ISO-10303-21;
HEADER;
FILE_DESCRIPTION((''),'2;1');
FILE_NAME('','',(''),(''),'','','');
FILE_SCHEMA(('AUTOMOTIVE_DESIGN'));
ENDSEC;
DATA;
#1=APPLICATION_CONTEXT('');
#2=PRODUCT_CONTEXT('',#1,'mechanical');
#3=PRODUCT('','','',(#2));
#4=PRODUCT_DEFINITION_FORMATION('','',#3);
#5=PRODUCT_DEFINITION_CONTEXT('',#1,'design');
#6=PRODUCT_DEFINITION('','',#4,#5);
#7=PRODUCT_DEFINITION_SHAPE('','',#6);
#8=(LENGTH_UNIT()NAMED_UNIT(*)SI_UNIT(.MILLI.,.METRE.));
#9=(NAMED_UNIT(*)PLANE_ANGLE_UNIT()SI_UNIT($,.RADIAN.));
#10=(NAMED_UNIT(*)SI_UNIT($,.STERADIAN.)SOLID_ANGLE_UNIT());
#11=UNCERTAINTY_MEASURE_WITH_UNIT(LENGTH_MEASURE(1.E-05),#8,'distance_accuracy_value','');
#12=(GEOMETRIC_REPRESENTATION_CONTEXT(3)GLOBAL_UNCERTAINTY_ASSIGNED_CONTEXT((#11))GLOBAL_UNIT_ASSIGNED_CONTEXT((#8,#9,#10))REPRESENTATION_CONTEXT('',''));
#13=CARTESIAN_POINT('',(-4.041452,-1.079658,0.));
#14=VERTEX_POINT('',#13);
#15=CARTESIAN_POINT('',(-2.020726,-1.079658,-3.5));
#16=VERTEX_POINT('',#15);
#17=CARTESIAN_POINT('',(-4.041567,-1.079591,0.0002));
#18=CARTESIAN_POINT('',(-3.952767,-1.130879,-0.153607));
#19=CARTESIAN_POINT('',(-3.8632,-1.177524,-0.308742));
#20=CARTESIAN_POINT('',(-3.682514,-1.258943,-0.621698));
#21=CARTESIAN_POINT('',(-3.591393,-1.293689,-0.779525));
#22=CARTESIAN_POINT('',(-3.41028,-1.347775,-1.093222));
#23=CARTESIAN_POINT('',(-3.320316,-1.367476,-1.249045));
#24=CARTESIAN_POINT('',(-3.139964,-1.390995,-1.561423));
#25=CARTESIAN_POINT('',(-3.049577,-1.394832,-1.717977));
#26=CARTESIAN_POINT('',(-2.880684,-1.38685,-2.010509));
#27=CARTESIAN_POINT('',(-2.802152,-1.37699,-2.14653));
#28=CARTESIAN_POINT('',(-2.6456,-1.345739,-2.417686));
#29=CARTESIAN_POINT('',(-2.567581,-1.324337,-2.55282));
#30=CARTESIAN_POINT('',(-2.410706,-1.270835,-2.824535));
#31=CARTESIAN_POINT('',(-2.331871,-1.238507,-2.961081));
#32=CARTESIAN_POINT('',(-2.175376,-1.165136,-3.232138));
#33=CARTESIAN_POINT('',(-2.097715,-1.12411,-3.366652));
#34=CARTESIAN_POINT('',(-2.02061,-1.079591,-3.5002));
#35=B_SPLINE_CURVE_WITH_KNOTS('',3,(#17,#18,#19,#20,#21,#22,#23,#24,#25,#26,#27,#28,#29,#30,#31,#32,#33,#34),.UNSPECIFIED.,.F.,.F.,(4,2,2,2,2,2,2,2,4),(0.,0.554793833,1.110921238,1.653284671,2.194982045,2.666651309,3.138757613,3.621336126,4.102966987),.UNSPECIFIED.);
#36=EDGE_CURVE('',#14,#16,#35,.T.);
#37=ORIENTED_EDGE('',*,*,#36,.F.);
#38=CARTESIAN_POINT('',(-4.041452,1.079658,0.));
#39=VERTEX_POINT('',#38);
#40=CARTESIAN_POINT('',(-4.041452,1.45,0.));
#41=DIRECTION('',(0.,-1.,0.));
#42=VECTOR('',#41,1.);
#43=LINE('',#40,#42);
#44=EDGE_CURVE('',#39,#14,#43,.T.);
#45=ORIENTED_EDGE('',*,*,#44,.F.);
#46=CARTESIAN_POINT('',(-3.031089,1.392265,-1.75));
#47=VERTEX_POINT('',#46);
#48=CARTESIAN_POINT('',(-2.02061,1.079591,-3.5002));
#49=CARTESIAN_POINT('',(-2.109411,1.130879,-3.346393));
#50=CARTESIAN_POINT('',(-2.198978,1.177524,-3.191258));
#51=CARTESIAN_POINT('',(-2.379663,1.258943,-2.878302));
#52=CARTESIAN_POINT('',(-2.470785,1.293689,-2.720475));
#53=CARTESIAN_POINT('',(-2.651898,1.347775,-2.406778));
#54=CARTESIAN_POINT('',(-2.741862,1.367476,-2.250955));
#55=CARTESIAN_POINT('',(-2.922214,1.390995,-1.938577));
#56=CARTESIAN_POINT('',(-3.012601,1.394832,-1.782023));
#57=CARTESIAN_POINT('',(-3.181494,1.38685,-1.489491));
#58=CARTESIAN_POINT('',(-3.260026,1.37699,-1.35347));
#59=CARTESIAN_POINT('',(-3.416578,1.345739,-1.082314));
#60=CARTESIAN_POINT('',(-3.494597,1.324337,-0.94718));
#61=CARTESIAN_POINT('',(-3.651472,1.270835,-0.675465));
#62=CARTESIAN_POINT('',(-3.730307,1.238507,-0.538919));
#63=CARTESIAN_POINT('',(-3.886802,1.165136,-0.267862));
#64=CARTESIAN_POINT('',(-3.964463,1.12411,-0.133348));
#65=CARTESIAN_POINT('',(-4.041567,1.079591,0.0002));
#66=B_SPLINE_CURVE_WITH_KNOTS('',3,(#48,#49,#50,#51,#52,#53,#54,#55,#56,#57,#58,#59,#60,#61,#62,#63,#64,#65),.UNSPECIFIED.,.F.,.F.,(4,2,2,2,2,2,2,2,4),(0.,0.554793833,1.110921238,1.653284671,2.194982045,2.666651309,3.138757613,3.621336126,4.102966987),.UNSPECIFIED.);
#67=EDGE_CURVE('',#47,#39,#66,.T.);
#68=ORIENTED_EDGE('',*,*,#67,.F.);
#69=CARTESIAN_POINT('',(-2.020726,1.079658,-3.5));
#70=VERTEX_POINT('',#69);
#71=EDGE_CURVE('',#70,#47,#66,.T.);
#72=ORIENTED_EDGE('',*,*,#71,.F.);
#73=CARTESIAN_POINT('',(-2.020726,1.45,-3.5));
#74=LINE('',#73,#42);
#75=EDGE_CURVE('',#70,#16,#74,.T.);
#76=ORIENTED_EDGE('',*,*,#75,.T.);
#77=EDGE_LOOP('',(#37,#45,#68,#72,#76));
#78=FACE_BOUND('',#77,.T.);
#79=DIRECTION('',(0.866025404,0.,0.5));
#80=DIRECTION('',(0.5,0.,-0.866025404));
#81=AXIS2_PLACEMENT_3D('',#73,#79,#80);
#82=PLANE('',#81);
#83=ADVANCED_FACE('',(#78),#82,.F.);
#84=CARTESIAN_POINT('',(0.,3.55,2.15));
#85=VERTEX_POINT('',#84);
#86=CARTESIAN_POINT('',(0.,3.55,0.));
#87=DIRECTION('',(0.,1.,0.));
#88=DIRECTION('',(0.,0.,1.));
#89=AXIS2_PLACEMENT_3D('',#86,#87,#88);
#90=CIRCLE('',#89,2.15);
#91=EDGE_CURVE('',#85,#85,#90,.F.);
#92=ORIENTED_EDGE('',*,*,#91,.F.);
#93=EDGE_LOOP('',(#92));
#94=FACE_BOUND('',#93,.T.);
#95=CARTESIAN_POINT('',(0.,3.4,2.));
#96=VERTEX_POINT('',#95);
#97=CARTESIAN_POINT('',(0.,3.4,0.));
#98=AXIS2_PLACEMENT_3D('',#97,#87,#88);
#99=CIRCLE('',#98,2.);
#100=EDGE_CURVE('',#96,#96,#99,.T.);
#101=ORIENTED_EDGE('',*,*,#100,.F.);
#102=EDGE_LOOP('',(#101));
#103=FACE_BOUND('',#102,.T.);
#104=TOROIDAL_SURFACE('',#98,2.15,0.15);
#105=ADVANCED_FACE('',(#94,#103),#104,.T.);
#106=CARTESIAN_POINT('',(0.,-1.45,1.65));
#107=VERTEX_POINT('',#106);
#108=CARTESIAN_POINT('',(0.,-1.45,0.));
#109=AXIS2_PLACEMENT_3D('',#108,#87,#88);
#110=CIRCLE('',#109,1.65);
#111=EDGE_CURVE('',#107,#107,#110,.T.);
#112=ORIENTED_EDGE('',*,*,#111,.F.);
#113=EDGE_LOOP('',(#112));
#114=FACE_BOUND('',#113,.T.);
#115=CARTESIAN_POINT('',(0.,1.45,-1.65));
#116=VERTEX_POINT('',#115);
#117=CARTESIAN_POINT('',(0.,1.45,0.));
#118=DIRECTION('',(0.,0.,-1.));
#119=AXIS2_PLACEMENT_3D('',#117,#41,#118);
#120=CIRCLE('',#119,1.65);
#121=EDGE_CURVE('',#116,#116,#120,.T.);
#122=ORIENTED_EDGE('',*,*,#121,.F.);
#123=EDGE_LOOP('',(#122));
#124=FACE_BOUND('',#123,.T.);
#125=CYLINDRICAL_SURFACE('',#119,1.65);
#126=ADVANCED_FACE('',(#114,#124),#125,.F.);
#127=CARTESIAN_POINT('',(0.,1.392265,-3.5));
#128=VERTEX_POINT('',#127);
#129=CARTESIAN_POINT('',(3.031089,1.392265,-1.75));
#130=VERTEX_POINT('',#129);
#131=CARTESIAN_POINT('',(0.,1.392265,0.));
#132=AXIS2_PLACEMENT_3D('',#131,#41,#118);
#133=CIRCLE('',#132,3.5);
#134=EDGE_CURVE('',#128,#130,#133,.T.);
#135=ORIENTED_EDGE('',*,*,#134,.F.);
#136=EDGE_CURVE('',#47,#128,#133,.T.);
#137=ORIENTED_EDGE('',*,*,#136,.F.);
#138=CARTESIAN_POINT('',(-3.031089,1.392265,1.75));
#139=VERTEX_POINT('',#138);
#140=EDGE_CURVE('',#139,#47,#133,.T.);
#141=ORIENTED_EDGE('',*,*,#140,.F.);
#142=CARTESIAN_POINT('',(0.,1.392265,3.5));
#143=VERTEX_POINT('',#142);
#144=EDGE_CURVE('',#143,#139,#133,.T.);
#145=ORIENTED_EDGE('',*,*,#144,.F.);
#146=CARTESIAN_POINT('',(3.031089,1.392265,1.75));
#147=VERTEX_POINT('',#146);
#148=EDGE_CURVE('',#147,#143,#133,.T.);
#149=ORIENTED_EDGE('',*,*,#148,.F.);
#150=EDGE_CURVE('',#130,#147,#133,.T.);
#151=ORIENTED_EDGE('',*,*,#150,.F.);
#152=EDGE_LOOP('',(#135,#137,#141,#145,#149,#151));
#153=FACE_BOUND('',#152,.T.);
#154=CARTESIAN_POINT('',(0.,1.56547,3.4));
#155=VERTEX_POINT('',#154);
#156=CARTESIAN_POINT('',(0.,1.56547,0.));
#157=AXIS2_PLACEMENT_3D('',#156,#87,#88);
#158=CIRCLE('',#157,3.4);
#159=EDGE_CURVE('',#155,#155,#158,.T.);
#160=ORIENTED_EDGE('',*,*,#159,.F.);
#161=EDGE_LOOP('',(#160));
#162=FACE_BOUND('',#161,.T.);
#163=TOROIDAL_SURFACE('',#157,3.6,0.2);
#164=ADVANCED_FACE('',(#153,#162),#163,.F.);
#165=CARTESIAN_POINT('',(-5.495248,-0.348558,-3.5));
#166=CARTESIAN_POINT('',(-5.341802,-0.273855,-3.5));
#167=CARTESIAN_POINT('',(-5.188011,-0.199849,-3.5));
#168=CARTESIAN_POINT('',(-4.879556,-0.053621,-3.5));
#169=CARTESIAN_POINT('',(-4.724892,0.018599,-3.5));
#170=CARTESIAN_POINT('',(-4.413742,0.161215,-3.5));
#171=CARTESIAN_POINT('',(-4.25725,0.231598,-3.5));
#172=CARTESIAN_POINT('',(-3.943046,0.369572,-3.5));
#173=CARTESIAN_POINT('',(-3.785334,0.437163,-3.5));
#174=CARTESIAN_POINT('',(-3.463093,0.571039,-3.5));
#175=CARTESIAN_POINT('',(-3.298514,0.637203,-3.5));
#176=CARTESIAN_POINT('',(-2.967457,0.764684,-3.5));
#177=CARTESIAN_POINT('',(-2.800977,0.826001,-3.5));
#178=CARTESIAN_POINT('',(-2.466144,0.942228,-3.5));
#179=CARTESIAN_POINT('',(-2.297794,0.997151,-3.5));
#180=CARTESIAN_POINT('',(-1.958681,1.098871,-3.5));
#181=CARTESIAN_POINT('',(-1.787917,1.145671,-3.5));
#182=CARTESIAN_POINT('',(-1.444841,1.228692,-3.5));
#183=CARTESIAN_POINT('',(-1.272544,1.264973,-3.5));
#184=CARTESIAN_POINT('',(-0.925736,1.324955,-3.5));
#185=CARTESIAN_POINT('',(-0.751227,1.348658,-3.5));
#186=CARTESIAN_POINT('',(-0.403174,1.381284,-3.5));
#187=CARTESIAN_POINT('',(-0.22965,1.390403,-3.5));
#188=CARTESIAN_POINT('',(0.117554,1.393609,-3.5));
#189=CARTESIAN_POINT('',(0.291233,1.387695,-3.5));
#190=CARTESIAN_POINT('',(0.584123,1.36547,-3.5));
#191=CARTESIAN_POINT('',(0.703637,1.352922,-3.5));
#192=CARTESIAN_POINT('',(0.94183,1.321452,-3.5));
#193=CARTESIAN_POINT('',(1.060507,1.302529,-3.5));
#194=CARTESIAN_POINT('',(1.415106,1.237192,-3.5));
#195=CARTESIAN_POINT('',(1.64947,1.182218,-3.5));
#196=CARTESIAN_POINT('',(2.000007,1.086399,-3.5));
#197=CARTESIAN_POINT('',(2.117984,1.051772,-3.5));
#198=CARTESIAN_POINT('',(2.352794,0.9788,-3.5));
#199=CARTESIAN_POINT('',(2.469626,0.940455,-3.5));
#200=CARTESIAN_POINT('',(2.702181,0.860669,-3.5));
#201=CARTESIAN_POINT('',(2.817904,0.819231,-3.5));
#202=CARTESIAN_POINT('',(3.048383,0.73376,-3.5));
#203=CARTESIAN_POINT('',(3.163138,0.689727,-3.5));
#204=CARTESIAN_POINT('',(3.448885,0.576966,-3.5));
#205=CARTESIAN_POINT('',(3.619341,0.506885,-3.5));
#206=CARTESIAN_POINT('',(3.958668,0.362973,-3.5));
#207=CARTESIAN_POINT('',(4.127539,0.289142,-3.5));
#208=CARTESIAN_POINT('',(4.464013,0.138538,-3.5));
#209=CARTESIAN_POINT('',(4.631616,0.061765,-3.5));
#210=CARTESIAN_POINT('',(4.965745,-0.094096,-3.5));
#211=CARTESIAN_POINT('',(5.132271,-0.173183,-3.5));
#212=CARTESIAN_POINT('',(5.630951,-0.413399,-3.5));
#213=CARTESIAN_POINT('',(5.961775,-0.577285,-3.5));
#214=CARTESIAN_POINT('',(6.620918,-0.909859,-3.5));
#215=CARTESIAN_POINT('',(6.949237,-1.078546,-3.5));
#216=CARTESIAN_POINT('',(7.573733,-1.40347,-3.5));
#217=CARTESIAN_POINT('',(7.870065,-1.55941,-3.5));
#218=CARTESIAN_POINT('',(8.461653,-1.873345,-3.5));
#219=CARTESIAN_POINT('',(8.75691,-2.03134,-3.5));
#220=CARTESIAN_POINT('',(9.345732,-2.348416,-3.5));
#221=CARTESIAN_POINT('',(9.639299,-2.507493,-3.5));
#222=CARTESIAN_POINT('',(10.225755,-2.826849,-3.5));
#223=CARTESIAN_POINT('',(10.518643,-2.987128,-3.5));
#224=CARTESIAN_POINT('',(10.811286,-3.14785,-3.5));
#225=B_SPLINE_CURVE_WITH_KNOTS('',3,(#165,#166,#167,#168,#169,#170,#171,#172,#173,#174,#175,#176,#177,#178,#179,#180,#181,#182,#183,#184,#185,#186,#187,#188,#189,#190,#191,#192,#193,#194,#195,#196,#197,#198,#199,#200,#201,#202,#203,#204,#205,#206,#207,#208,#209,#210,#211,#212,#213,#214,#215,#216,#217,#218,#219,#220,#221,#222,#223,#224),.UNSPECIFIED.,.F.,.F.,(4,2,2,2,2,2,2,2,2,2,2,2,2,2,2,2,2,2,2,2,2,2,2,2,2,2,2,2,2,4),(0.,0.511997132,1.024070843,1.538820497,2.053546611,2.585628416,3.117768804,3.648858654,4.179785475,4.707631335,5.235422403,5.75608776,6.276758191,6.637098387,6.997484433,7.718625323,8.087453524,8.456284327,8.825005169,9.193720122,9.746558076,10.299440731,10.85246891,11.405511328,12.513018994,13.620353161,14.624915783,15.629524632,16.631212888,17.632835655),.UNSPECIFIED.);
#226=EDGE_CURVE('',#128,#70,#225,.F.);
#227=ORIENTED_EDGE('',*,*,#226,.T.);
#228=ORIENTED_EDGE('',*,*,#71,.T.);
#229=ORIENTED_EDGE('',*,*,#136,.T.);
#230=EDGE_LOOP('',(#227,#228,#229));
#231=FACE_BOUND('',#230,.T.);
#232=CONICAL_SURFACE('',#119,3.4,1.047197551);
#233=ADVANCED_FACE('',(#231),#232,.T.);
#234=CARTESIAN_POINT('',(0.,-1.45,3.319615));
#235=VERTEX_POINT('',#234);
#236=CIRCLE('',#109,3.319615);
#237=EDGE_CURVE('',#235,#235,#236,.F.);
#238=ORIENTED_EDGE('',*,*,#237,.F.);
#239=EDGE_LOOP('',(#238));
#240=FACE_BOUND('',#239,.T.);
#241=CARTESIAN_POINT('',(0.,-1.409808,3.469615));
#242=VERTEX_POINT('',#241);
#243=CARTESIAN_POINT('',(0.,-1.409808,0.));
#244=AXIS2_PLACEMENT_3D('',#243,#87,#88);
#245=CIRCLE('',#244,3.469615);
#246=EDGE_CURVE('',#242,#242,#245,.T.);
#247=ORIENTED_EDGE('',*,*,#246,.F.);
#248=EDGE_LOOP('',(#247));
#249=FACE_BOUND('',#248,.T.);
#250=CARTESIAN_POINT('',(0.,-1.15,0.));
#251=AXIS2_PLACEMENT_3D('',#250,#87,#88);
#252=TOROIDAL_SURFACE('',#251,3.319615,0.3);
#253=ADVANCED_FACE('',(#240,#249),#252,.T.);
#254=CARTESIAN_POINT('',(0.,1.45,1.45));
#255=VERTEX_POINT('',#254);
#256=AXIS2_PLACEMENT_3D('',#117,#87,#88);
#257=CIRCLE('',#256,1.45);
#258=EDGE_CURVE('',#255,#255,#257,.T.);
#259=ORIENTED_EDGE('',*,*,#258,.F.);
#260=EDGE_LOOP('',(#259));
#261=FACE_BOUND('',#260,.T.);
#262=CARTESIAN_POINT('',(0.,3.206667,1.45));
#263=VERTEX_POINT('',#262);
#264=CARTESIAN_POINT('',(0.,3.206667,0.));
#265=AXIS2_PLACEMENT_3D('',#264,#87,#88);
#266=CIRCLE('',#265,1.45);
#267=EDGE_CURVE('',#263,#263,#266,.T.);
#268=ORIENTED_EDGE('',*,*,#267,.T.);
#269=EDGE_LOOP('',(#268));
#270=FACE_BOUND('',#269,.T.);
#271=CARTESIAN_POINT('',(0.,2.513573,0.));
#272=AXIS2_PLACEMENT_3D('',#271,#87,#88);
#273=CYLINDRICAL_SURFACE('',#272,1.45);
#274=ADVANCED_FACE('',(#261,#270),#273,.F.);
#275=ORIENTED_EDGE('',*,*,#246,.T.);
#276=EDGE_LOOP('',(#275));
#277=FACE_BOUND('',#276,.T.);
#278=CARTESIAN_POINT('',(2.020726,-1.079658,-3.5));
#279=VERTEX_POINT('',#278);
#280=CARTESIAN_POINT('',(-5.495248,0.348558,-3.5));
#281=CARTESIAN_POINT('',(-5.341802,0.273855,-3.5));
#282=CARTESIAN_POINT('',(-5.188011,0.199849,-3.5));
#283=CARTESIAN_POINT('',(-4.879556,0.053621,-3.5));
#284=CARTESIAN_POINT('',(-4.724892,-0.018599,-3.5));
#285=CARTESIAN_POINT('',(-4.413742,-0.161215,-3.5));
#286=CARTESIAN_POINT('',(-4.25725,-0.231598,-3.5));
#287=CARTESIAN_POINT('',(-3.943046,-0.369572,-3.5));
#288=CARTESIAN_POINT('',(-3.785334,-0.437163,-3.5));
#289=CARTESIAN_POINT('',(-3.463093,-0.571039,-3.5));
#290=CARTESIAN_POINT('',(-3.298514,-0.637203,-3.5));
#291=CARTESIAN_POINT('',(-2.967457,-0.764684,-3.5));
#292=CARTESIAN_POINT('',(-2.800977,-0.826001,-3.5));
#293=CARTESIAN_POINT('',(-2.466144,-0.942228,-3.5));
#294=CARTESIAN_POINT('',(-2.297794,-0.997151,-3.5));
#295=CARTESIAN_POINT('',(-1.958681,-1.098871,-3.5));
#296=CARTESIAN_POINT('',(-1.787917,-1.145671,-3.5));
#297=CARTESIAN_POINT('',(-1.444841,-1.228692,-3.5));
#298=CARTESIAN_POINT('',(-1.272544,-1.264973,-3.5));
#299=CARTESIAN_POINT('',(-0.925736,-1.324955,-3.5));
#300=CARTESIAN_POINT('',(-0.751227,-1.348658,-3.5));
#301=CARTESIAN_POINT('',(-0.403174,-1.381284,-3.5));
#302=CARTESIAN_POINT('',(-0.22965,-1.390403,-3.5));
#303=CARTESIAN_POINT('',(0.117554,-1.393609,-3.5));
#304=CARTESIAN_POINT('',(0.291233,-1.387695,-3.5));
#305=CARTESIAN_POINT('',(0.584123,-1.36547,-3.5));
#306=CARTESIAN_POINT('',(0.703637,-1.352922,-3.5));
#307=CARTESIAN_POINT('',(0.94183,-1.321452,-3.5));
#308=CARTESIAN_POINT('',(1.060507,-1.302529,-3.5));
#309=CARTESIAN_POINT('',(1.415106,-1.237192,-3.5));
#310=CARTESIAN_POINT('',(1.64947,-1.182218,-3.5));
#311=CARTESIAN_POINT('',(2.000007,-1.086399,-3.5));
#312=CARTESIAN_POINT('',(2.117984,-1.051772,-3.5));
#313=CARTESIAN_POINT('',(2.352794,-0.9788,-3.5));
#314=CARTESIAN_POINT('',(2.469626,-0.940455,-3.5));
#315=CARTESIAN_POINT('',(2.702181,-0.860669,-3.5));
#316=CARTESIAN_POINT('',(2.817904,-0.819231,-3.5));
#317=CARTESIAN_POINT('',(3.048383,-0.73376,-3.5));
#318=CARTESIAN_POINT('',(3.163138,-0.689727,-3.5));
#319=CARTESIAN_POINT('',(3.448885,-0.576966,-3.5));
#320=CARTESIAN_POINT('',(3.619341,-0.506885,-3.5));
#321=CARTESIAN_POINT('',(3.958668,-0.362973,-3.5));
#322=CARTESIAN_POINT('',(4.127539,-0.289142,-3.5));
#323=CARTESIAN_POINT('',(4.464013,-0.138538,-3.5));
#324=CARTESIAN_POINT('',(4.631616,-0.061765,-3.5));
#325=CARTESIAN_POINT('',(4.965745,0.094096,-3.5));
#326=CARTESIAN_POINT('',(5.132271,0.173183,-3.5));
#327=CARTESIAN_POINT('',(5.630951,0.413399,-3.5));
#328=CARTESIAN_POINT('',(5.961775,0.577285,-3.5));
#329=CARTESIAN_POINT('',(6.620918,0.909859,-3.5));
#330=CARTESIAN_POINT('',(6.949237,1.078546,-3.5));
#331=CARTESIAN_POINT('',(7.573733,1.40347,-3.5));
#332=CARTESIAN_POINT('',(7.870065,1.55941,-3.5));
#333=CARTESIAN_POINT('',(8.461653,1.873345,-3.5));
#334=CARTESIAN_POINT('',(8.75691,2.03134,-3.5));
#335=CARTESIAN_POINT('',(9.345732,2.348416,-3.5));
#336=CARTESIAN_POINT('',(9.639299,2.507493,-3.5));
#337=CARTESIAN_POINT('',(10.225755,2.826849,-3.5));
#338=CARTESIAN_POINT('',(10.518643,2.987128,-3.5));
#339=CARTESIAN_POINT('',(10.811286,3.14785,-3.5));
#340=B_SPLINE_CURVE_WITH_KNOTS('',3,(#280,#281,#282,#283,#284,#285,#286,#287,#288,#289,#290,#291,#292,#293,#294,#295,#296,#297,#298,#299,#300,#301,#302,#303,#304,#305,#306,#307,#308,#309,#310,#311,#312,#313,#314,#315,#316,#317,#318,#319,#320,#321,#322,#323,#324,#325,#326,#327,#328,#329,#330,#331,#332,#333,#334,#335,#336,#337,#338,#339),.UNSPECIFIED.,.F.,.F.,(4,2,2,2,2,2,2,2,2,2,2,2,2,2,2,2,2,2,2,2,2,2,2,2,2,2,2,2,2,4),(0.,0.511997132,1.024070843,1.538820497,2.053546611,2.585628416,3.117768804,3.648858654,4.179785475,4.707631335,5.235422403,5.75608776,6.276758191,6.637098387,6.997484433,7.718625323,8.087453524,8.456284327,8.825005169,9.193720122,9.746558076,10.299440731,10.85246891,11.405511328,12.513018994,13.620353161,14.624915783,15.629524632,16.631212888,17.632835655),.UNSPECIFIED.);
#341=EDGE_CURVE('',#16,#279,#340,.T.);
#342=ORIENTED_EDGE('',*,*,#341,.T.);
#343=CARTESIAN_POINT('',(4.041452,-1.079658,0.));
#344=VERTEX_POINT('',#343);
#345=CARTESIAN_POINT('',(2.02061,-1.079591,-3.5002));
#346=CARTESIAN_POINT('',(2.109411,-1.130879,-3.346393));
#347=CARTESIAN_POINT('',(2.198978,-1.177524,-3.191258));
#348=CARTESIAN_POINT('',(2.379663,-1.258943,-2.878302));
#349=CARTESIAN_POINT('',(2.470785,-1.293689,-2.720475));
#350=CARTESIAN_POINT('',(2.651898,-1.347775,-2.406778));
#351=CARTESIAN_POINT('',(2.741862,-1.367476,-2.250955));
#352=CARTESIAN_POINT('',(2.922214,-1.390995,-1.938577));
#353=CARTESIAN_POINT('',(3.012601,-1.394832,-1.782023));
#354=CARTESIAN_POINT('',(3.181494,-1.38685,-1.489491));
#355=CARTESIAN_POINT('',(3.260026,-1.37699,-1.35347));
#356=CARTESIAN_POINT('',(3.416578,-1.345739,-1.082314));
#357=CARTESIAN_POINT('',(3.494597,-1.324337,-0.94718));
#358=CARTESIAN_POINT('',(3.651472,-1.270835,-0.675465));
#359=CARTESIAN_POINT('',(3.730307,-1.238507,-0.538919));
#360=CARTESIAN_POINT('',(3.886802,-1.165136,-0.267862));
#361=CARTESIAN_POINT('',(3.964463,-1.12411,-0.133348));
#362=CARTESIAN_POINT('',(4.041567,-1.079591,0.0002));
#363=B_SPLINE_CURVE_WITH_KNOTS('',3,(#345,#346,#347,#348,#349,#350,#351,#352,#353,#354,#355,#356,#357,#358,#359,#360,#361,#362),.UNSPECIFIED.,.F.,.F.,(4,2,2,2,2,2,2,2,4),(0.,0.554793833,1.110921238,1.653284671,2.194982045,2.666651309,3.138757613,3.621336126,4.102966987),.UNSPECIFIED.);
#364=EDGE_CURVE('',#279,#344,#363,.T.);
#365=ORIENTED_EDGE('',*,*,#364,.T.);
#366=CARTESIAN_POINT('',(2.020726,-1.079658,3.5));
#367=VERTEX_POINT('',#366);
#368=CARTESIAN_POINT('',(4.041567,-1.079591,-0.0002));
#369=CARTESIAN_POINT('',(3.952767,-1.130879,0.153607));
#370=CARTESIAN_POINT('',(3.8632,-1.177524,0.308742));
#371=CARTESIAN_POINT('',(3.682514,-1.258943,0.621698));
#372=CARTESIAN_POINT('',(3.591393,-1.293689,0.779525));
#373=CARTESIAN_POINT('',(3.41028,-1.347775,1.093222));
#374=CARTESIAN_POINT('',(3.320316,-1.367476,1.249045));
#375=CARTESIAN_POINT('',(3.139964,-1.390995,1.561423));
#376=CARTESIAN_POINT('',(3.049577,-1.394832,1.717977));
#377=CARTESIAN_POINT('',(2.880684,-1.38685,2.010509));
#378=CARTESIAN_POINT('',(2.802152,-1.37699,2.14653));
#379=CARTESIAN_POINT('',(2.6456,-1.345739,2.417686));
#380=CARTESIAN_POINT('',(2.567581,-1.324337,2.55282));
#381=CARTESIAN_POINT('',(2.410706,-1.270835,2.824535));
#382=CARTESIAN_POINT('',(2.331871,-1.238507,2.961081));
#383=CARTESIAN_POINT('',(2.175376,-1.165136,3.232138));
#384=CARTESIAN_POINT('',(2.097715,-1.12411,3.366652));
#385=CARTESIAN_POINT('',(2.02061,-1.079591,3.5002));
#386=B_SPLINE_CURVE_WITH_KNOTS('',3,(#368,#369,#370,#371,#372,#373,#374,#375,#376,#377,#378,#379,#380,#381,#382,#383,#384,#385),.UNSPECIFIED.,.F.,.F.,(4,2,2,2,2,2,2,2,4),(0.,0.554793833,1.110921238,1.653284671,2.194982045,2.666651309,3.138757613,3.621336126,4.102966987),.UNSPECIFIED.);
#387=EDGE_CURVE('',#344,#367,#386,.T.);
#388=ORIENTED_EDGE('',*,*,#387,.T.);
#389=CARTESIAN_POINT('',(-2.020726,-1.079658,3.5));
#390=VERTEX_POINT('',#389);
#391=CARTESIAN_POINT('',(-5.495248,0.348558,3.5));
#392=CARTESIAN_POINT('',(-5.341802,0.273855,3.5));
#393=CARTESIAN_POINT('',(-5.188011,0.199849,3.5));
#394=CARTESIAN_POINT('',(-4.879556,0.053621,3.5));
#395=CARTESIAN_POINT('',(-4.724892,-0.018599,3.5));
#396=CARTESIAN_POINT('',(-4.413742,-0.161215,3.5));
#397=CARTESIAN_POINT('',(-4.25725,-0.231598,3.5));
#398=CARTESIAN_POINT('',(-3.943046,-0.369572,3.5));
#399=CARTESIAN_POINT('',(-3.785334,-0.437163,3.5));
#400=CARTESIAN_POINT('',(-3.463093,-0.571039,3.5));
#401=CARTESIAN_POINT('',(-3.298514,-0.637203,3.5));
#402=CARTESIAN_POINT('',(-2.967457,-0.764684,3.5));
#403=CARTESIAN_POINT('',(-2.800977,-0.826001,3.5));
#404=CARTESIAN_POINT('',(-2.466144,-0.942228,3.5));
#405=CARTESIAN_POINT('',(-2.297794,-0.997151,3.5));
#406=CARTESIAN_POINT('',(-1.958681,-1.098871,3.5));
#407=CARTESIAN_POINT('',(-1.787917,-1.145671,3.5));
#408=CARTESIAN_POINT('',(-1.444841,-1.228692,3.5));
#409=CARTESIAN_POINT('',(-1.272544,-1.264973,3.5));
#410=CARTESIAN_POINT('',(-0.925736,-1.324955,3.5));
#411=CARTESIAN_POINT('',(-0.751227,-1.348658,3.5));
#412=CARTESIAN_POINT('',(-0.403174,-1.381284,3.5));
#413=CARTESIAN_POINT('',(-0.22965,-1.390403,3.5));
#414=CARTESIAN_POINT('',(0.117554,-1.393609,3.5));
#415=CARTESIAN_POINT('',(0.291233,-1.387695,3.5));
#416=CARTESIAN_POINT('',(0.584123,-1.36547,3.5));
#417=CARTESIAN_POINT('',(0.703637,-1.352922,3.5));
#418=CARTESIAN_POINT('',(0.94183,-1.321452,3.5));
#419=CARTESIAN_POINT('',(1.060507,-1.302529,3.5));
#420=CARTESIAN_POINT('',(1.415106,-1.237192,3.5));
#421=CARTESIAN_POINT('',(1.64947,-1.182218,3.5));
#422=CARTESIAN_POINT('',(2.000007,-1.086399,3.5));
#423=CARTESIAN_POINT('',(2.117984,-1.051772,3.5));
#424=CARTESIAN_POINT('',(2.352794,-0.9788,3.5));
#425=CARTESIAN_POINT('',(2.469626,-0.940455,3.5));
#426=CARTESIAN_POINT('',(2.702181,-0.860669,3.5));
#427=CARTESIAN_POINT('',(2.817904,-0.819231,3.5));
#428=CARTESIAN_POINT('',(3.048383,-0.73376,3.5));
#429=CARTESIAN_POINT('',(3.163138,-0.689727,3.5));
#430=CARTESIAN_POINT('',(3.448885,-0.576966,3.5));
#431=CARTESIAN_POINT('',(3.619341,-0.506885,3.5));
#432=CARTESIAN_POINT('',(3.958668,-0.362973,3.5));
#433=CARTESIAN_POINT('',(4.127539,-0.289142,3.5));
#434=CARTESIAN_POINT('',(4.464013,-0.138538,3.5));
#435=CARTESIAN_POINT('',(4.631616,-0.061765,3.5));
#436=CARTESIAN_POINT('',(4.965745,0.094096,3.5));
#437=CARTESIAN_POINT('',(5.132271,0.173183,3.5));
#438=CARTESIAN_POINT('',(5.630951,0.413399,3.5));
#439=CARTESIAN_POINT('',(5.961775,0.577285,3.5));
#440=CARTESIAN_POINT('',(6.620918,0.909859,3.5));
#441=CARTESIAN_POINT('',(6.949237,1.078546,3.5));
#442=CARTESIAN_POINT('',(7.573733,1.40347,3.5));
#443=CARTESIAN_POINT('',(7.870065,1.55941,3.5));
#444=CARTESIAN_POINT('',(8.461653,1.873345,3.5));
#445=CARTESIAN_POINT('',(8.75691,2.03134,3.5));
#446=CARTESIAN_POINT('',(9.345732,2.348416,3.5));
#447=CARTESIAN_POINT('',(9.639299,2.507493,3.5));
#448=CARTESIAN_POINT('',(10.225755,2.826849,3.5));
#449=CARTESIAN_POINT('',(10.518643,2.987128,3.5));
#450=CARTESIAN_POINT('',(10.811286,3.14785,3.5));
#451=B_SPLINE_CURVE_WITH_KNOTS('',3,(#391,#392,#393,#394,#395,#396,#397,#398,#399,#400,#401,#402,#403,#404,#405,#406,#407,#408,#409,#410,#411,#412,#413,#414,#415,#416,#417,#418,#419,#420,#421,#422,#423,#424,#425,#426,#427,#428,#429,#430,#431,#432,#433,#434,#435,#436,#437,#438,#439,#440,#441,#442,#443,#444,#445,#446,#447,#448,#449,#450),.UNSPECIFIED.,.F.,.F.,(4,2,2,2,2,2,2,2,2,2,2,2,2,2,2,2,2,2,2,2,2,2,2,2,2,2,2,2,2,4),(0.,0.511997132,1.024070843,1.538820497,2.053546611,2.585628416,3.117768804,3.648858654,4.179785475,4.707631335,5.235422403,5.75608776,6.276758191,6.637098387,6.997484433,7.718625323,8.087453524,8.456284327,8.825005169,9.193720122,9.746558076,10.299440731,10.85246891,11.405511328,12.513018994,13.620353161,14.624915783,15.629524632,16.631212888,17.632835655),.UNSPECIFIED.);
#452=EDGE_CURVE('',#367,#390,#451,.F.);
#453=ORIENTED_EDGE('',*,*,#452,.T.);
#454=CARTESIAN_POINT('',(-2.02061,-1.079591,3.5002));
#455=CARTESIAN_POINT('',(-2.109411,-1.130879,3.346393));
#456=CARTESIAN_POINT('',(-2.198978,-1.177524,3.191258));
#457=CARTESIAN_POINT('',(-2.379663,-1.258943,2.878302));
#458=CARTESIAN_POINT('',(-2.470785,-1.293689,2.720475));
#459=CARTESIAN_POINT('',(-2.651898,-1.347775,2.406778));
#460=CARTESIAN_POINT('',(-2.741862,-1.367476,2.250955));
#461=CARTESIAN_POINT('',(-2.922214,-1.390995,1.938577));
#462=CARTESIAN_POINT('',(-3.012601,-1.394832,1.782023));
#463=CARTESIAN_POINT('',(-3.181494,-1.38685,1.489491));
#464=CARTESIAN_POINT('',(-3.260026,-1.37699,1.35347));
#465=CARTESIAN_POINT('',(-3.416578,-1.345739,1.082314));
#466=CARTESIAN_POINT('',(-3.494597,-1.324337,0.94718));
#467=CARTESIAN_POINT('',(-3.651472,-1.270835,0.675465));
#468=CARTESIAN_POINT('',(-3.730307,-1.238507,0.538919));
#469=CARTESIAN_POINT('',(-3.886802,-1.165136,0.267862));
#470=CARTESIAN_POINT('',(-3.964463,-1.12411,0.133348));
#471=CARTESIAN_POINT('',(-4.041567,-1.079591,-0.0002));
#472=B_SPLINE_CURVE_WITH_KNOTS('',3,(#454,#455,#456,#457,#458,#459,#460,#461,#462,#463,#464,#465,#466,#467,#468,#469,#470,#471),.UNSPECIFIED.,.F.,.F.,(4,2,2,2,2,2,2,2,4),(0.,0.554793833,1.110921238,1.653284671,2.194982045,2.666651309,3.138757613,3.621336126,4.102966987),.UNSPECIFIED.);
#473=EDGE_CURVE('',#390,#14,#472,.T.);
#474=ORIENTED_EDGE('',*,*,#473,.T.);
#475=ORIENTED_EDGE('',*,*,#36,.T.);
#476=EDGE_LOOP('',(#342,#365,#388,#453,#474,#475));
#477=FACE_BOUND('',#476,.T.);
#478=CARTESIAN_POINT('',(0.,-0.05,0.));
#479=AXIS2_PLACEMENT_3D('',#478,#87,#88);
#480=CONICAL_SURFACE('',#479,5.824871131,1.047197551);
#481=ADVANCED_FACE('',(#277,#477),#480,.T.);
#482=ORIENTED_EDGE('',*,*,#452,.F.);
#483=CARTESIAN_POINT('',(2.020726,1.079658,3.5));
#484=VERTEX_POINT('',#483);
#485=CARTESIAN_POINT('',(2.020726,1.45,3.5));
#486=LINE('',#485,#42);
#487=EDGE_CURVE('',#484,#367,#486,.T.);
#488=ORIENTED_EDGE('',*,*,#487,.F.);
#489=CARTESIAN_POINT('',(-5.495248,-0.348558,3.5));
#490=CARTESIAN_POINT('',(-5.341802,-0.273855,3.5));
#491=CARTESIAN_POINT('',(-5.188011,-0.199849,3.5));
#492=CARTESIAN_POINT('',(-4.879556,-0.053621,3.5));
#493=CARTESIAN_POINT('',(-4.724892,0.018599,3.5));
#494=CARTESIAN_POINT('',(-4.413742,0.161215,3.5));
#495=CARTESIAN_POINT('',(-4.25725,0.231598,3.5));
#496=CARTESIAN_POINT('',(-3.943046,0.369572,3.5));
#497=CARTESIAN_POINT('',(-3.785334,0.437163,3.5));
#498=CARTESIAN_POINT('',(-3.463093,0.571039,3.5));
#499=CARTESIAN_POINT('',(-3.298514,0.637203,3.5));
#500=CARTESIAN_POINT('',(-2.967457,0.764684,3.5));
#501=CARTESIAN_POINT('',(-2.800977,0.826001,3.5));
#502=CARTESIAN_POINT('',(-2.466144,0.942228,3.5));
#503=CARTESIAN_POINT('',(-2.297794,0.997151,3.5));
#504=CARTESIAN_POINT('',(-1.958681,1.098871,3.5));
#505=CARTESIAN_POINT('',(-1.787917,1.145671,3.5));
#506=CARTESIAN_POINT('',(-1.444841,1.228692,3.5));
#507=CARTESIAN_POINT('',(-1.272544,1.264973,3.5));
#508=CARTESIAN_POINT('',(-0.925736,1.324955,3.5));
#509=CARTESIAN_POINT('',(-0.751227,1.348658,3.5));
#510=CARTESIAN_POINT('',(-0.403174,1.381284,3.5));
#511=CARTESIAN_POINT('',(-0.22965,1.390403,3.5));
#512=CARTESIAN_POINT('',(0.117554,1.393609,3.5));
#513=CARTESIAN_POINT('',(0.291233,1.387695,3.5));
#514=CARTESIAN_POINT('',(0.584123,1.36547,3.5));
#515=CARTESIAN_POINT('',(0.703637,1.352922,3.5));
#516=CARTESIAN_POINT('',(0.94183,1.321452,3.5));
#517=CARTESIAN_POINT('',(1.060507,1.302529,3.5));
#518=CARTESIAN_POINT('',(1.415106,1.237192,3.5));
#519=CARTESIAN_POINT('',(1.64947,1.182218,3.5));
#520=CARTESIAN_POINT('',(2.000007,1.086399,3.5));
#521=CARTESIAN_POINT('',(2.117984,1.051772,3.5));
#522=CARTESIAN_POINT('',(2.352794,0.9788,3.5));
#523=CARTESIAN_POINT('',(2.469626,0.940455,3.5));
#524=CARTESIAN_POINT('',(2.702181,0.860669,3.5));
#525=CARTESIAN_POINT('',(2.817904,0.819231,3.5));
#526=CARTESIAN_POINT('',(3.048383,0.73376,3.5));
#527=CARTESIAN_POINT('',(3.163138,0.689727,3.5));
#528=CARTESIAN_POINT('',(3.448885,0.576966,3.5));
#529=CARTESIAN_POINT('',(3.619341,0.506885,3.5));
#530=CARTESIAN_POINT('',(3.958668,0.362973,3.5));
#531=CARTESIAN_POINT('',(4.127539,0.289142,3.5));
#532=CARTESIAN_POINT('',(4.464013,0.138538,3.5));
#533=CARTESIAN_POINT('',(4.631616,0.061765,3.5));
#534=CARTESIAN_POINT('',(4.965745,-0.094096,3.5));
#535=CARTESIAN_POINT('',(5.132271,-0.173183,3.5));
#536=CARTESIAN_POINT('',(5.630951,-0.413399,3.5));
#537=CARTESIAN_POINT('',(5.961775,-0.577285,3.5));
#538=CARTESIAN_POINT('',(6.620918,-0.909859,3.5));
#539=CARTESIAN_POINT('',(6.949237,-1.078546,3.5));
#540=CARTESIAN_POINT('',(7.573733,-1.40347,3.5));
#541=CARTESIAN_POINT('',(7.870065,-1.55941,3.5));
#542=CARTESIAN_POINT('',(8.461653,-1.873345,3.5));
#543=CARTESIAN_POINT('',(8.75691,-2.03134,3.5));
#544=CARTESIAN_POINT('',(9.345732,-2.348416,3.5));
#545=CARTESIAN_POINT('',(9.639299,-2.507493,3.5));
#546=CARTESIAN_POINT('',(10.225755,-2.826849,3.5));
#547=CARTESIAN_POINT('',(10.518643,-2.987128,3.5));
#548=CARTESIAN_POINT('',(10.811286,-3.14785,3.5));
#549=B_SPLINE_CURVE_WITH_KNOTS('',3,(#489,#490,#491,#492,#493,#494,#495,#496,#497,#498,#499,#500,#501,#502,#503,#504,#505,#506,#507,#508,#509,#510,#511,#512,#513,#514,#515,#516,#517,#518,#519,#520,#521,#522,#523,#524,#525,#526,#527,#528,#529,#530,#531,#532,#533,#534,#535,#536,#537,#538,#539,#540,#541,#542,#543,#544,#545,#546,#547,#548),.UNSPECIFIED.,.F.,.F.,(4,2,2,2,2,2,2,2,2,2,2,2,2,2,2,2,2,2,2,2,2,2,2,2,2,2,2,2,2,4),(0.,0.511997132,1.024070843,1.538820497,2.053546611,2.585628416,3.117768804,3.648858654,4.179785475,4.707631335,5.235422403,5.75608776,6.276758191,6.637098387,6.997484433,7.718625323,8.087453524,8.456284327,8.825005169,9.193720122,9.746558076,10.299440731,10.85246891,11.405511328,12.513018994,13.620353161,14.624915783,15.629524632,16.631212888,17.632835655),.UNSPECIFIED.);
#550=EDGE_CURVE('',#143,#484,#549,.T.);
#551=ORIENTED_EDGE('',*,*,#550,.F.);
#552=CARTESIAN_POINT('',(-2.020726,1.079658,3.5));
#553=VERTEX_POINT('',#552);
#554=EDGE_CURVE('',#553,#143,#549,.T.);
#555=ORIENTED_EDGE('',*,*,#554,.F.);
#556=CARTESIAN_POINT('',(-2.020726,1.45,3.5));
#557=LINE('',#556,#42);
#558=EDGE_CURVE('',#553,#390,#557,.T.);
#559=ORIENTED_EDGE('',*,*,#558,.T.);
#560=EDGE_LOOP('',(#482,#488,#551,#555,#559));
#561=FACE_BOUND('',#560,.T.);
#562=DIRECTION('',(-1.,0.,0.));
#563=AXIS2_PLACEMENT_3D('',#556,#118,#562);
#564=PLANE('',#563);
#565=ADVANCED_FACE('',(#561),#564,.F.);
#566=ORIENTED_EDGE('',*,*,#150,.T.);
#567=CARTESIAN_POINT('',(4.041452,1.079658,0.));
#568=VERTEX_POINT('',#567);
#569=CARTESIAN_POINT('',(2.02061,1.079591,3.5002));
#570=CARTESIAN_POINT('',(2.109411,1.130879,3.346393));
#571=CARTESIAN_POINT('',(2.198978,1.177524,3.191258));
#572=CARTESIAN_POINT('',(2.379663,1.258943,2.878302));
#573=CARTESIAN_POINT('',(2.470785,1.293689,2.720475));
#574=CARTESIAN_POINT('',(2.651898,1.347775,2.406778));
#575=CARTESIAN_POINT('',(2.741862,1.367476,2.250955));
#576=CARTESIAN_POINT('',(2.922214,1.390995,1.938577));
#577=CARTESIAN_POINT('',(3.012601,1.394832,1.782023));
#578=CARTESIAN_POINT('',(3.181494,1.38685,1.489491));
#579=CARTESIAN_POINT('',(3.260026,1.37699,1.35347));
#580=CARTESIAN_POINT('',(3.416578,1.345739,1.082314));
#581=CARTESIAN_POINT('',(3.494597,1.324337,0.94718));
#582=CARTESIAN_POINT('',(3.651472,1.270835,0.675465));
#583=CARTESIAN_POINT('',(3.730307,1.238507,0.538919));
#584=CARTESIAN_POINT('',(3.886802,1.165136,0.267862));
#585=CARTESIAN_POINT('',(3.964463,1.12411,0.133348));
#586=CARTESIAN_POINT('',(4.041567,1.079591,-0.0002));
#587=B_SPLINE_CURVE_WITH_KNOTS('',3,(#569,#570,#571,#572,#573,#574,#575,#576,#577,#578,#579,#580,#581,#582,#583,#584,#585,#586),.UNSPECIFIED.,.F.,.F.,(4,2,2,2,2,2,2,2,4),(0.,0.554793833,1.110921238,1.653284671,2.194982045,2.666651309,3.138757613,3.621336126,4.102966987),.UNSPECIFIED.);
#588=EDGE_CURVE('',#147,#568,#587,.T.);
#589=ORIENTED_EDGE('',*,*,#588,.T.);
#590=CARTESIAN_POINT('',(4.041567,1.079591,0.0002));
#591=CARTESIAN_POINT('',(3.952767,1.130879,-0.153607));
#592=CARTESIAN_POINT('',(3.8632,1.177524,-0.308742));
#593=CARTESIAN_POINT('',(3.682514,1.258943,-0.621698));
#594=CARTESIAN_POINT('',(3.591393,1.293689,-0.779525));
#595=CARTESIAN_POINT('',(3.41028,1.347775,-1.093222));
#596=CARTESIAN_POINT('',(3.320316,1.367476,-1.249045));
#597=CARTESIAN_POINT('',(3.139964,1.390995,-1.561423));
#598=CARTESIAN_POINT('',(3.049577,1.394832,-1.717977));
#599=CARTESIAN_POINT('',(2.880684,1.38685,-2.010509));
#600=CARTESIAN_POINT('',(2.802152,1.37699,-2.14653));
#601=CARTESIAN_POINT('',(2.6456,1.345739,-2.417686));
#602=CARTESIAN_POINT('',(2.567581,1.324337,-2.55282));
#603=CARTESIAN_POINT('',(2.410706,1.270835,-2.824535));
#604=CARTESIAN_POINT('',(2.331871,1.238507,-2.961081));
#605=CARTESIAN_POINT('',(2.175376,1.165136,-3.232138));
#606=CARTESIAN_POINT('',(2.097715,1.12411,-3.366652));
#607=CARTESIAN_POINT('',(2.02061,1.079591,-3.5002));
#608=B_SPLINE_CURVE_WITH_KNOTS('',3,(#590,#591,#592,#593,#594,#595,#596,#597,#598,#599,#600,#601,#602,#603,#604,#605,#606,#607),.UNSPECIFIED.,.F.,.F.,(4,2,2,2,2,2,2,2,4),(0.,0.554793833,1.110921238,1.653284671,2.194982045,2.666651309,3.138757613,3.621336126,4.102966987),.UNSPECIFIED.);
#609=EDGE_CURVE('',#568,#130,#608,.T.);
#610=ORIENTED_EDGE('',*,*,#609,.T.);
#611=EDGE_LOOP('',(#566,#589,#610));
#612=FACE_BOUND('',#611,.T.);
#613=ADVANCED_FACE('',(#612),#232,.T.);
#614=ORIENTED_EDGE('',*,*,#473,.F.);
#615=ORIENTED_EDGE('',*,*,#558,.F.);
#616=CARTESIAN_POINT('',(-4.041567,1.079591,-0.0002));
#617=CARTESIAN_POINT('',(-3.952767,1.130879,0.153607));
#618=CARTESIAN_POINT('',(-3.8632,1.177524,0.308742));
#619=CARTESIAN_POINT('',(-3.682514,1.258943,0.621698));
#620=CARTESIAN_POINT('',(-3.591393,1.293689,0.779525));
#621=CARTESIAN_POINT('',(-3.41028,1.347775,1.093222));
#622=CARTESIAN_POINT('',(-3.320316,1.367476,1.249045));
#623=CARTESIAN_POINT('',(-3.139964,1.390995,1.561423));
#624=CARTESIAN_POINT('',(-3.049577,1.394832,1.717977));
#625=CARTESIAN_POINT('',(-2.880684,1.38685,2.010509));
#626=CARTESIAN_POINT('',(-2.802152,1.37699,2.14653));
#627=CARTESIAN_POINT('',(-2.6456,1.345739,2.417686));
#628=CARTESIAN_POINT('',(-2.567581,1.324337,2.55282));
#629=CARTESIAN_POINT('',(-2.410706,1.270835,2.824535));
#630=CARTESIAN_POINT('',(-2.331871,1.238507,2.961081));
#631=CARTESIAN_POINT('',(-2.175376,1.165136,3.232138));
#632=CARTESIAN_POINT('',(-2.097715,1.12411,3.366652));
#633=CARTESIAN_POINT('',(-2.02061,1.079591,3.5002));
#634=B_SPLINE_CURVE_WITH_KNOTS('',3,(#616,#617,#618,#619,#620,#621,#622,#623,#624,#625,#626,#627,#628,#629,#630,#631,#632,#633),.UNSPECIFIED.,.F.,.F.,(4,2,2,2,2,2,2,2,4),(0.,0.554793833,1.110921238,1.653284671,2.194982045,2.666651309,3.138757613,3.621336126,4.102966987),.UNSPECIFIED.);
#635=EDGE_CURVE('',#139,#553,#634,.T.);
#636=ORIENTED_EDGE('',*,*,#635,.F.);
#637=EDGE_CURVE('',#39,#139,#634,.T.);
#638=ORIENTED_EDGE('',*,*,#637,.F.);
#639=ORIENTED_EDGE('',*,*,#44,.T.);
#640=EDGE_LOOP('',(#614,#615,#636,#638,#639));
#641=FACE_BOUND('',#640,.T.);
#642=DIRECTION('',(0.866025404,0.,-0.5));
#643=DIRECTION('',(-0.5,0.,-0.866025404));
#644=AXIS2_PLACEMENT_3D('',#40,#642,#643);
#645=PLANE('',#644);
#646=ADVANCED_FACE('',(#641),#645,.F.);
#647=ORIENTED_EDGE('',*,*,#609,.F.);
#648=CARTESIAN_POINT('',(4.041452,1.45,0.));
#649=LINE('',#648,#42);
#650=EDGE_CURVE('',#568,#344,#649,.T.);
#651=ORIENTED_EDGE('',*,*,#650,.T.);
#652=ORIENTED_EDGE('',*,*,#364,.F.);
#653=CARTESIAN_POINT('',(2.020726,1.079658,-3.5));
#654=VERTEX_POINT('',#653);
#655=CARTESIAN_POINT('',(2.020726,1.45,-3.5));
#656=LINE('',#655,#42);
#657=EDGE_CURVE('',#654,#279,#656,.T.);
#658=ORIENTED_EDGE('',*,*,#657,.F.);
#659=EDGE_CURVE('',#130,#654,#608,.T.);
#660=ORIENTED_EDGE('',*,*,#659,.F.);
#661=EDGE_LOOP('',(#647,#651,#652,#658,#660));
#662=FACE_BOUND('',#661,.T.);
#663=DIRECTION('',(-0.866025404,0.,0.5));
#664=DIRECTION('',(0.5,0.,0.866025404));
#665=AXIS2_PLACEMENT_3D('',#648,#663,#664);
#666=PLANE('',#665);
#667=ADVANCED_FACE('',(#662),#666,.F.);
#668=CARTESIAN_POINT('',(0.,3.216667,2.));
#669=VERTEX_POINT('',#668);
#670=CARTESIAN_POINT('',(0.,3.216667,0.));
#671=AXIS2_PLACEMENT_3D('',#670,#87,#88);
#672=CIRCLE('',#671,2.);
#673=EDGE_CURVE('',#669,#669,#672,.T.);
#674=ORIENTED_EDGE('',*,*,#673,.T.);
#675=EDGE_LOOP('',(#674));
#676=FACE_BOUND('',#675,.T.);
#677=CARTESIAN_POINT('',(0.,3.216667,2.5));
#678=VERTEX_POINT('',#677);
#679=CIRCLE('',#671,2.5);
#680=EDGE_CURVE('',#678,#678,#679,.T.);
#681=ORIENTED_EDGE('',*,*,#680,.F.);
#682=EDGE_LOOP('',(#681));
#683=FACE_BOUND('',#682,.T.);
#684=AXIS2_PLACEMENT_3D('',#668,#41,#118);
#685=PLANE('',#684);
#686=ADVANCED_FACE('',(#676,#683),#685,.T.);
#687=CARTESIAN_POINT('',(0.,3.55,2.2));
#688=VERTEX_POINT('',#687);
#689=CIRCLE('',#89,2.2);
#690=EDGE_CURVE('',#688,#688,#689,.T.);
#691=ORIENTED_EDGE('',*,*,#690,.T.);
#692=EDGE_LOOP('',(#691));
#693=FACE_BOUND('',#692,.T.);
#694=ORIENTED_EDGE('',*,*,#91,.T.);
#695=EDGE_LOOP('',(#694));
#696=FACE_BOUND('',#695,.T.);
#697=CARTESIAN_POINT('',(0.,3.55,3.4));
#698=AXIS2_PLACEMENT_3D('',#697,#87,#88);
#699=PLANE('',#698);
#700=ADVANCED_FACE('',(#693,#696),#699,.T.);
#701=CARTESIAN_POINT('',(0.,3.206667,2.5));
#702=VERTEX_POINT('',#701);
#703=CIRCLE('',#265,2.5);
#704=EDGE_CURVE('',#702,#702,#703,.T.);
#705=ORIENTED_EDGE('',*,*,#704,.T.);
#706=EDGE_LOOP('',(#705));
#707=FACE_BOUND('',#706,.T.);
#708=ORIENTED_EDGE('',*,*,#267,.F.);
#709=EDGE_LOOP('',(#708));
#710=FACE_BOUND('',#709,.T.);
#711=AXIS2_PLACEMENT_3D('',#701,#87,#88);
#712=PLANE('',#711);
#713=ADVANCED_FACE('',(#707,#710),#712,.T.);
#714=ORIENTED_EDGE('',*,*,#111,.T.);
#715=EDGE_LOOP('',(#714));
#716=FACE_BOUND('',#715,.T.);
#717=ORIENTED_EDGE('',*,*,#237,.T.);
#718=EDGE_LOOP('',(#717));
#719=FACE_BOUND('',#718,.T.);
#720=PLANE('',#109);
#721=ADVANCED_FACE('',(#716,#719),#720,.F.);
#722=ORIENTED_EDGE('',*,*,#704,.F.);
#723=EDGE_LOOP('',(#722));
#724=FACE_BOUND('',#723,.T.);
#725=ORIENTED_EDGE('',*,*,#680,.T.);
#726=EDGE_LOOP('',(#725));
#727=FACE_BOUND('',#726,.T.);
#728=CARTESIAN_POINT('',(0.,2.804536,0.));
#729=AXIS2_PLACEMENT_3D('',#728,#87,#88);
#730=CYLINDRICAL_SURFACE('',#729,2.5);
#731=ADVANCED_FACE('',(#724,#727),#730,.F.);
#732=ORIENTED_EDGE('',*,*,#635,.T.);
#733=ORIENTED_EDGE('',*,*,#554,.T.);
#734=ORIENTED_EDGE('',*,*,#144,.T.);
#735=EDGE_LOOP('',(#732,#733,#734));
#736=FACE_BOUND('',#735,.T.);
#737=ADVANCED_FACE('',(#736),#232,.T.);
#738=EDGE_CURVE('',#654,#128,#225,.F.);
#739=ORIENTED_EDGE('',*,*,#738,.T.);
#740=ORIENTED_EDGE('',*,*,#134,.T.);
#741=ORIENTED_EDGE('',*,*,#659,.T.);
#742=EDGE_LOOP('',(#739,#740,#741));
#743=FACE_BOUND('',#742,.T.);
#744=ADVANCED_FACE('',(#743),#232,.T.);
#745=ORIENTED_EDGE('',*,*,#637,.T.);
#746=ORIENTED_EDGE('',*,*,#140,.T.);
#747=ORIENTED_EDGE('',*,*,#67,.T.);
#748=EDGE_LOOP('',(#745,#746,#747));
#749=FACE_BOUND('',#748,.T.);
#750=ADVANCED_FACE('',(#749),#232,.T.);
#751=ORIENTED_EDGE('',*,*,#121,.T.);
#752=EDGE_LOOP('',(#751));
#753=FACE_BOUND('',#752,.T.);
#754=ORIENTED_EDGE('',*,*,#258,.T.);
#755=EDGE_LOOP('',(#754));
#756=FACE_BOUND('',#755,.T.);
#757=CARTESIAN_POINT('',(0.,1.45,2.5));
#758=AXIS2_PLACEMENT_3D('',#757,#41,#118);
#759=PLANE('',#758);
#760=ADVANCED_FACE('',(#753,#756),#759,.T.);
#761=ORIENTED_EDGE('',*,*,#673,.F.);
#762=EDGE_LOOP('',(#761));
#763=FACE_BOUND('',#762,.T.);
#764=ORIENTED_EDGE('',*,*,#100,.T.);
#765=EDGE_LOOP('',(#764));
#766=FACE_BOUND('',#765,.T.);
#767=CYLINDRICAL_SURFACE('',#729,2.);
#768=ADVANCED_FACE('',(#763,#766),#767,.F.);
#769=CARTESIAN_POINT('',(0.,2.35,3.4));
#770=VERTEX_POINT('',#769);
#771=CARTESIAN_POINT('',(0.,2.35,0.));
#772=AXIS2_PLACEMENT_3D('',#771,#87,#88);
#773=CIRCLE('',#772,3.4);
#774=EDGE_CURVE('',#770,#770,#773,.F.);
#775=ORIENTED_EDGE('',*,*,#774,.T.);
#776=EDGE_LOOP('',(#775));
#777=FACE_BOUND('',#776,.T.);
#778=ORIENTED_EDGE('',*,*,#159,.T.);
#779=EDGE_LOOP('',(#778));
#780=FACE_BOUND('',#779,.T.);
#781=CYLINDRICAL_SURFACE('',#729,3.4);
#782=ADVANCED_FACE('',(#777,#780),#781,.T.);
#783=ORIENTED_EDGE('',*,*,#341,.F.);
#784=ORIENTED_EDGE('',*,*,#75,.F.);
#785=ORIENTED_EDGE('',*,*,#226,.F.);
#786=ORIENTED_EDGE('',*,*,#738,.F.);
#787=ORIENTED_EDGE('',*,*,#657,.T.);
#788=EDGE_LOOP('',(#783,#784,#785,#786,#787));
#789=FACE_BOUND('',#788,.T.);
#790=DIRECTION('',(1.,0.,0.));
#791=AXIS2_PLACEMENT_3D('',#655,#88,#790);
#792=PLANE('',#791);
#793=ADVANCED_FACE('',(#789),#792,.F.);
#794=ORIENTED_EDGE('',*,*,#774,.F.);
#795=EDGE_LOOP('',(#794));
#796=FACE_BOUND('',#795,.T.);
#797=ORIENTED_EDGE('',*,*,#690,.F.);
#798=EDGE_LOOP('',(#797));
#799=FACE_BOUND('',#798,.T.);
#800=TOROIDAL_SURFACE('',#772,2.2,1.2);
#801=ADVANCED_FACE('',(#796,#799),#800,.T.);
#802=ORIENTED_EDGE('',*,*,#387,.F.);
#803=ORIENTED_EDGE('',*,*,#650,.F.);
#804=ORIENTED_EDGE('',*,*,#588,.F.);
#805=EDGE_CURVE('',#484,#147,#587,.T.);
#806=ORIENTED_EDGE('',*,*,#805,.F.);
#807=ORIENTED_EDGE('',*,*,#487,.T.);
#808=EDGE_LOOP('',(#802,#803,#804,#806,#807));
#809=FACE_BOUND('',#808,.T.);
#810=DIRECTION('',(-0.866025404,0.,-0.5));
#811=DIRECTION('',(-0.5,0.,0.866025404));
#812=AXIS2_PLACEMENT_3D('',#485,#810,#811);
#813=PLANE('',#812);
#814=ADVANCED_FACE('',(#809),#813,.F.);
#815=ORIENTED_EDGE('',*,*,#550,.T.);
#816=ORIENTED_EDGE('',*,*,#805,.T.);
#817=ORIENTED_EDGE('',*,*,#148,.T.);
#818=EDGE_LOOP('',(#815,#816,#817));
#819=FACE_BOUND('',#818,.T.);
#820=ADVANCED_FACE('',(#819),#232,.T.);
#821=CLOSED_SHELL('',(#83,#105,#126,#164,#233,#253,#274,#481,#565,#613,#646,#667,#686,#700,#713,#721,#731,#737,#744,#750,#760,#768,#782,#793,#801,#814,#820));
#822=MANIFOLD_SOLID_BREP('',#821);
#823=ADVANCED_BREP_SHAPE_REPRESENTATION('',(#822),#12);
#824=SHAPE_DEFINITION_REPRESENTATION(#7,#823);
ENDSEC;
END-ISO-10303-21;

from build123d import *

# Parameters (mm, degrees)
SKETCH_1_R      = 1.65
EXTRUDE_1_DEPTH = 1.45
SKETCH_5_W      = 1.05
SKETCH_5_H      = 1.756666667
FILLET_1_R      = 1.2
FILLET_3_R      = 0.15
FILLET_4_R      = 0.2
FILLET_5_R      = 0.3


with BuildPart() as part:
    # 草图1 → 凸台-拉伸1 (new, symmetric)
    with BuildSketch(Plane(origin=(0, 0, 0), x_dir=(1, 0, 0), z_dir=(0, 1, 0))):
        Polygon((4.041451884, 0), (2.020725942, 3.5), (-2.020725942, 3.5), (-4.041451884, 0), (-2.020725942, -3.5), (2.020725942, -3.5), align=None)
        with Locations(Location((0, 0, 0), (0, 0, 270))):
            Circle(SKETCH_1_R, mode=Mode.SUBTRACT)
    extrude(amount=EXTRUDE_1_DEPTH, both=True)

    # 草图4 → 旋转1 (revolve)
    with BuildSketch(Plane(origin=(0, 0, 0), x_dir=(0, 0, -1), z_dir=(1, 0, 0))):
        Polygon((-3.4, 1.45), (-3.4, 3.55), (-2, 3.55), (-2, 3.216666667), (-2.5, 3.216666667), (-2.5, 1.45), align=None)
    revolve(axis=Axis((0, 2.804536462, 0), (0, -1, 0)))

    # 草图5 → 旋转2 (revolve)
    with BuildSketch(Plane(origin=(0, 0, 0), x_dir=(0, 0, -1), z_dir=(1, 0, 0))):
        with Locations((-1.975, 2.328333334)):
            Rectangle(SKETCH_5_W, SKETCH_5_H)
    revolve(axis=Axis((0, 2.51357275, 0), (0, -1, 0)))

    # 圆角1
    fillet_1_edges = [part.edges().sort_by_distance(p)[0] for p in [
        (0, 3.55, -3.4),
    ]]
    fillet(fillet_1_edges, radius=FILLET_1_R)

    # 圆角3
    fillet_3_edges = [part.edges().sort_by_distance(p)[0] for p in [
        (0, 3.55, -2),
    ]]
    fillet(fillet_3_edges, radius=FILLET_3_R)

    # 草图6 → 切除-旋转1 (revolve, cut)
    with BuildSketch(Plane(origin=(0, 0, 0), x_dir=(0, 0, -1), z_dir=(1, 0, 0)), mode=Mode.PRIVATE) as cut_revolve_1_sk:
        Polygon((3.4, 1.45), (5.824871131, 1.45), (5.824871131, 0.05), align=None)
        Polygon((5.824871131, -0.05), (3.4, -1.45), (5.824871131, -1.45), align=None)
    revolve(cut_revolve_1_sk.sketch.rotate(Axis((0, 2.537572, 0), (0, -1, 0)), 30.000000005), axis=Axis((0, 2.537572, 0), (0, -1, 0)), mode=Mode.SUBTRACT)

    # 圆角4
    fillet_4_edges = [part.edges().sort_by_distance(p)[0] for p in [
        (3.284147809, 1.45, 0.879984753),
    ]]
    fillet(fillet_4_edges, radius=FILLET_4_R - 0.0001)  # a hair under: the kernel refuses the full size

    # 圆角5
    fillet_5_edges = [part.edges().sort_by_distance(p)[0] for p in [
        (-1.7, -1.45, 2.944486373),
    ]]
    fillet(fillet_5_edges, radius=FILLET_5_R)


solid = part.part
